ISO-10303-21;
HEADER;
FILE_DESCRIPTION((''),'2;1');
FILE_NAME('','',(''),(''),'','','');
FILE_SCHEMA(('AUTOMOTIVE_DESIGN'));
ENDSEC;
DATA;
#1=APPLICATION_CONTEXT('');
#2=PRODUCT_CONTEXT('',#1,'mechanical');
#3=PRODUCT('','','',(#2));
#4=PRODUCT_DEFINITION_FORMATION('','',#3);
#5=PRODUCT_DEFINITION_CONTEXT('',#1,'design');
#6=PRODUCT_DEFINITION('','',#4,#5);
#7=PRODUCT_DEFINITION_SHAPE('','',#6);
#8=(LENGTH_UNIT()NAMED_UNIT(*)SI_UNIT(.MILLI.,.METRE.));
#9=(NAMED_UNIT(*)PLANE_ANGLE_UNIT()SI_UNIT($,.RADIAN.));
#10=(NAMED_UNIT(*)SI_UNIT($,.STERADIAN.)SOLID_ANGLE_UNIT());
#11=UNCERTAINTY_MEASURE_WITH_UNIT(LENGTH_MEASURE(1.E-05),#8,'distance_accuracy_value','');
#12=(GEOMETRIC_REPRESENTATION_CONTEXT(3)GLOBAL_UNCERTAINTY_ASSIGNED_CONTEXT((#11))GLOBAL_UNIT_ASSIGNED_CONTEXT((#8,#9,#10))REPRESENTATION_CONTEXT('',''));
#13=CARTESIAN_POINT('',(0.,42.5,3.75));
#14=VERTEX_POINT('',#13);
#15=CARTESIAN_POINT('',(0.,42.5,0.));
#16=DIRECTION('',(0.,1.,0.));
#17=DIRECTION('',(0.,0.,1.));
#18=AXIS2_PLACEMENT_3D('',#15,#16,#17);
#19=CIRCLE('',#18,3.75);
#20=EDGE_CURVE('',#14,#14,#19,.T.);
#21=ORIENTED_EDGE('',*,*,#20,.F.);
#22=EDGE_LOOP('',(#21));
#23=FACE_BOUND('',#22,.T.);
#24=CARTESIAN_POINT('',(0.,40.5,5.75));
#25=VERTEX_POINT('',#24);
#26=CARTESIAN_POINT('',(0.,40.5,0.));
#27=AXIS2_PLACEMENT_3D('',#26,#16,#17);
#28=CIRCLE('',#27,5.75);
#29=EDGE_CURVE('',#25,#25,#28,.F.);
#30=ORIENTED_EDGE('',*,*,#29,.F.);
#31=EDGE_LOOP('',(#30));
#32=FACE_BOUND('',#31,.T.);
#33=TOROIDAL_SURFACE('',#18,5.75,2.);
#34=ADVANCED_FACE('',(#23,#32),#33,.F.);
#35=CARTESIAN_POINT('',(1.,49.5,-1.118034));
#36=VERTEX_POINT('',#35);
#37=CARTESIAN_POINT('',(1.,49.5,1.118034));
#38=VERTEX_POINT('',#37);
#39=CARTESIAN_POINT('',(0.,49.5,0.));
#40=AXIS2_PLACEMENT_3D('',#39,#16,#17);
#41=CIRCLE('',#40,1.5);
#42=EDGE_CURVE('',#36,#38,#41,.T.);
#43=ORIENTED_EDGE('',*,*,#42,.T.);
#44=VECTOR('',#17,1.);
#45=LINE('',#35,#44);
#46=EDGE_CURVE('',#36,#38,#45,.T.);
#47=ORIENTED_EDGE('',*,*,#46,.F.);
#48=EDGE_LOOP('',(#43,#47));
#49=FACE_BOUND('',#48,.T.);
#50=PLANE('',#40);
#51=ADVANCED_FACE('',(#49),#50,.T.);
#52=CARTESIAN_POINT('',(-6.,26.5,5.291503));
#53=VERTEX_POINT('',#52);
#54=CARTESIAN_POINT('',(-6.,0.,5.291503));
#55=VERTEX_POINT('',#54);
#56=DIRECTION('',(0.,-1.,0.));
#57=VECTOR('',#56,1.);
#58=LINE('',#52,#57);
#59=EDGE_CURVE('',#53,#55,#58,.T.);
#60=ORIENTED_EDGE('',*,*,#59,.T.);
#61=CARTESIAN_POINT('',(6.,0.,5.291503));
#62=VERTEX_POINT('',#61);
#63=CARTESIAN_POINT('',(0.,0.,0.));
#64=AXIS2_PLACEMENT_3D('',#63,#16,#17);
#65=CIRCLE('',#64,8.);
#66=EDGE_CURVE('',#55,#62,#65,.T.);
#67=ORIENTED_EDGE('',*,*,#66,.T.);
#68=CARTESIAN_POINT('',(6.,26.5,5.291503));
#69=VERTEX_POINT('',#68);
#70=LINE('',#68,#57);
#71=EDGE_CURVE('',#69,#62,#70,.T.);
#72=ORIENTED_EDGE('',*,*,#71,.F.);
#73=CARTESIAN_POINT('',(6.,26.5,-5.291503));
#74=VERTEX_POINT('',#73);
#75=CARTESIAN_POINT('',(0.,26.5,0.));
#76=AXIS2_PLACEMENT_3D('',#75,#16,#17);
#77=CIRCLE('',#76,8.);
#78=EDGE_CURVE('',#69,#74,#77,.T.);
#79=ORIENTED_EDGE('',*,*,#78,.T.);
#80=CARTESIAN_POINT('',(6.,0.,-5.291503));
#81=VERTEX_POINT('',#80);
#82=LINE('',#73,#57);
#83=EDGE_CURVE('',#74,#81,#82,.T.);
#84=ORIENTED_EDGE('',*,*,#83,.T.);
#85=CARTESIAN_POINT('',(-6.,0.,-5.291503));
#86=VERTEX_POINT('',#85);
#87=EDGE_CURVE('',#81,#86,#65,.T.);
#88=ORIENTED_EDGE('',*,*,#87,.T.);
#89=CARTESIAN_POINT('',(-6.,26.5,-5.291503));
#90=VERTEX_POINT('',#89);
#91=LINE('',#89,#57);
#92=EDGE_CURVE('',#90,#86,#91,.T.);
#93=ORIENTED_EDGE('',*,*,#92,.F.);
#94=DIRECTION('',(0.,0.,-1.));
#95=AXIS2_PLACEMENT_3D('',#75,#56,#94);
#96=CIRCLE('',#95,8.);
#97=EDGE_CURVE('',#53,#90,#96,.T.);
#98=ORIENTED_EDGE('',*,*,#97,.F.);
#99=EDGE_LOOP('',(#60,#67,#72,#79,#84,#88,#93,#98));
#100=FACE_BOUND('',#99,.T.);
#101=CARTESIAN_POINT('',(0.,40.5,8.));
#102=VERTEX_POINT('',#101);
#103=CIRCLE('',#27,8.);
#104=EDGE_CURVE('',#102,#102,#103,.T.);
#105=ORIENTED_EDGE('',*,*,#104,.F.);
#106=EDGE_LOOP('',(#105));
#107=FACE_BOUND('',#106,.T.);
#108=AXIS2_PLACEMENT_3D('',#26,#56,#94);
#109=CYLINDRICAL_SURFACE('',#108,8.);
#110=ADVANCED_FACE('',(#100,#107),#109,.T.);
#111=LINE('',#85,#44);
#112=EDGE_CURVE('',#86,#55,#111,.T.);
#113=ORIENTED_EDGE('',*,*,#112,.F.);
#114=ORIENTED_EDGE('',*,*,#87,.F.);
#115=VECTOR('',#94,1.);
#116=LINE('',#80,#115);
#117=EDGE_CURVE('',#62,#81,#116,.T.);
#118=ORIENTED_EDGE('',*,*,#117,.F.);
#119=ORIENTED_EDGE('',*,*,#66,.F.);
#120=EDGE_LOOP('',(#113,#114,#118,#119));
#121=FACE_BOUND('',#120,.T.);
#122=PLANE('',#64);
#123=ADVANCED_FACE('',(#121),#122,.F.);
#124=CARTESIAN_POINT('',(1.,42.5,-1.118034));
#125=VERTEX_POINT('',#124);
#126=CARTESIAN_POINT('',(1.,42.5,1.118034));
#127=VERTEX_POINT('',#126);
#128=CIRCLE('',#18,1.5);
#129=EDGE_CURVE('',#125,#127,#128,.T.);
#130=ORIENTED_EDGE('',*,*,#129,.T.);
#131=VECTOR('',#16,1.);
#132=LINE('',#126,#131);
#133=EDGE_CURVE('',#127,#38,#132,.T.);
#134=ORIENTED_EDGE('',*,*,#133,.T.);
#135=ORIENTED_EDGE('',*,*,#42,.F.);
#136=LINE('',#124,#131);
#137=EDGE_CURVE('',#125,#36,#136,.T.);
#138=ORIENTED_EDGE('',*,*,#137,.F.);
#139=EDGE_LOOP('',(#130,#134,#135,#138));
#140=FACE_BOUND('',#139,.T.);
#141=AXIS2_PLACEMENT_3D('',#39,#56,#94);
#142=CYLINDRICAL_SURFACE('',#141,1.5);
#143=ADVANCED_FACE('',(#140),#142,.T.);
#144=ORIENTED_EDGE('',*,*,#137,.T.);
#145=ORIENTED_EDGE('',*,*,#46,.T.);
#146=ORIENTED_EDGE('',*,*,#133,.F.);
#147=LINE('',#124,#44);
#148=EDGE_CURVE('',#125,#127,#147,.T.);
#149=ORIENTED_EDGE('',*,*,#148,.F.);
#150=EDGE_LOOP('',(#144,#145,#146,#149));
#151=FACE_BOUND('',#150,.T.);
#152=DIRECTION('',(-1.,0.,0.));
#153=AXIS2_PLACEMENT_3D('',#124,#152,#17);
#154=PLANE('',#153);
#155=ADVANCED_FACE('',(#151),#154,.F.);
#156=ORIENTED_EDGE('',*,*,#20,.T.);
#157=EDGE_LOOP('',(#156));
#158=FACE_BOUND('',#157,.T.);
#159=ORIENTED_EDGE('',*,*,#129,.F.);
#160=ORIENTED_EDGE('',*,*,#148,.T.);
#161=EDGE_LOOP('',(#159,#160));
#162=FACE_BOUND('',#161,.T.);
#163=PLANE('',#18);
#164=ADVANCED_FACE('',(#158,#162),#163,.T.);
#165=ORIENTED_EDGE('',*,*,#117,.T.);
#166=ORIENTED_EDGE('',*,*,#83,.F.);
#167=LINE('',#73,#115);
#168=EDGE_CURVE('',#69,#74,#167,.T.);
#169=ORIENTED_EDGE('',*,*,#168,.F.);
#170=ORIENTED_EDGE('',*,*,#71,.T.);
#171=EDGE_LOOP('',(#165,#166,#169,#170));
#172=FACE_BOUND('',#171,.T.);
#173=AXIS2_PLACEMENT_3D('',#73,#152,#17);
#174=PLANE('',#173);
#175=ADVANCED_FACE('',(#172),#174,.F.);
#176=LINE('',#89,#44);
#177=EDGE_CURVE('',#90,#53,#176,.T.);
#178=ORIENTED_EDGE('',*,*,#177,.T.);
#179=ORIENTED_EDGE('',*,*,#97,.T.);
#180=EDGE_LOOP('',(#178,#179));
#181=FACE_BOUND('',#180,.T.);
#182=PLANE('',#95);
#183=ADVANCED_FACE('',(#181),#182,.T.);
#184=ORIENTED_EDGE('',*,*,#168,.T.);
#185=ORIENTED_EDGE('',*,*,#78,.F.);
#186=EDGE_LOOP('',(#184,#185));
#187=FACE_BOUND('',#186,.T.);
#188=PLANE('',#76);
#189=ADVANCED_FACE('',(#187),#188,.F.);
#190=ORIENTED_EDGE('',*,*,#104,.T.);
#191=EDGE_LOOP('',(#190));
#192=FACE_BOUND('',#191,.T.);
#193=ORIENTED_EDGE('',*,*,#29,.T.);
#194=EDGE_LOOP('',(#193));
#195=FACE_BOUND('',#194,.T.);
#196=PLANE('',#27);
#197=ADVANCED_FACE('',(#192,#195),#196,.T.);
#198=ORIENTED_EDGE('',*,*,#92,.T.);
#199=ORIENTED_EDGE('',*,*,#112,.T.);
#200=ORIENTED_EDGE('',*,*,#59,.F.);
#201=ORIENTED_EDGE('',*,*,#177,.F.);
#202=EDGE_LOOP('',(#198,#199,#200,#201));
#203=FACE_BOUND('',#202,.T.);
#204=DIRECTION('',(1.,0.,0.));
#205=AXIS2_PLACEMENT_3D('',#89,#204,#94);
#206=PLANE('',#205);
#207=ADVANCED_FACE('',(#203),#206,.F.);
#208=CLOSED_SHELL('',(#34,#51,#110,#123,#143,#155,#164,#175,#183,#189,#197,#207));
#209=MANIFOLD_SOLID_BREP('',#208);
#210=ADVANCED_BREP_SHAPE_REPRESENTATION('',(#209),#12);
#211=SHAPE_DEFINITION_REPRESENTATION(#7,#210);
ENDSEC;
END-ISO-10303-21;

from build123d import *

# Parameters (mm, degrees)
SKETCH1_R           = 8
BOSS_EXTRUDE1_DEPTH = 40.5
SKETCH2_W           = 6
SKETCH2_H           = 10.583005244
CUT_EXTRUDE1_DEPTH  = 26.5
SKETCH3_R           = 3.75
BOSS_EXTRUDE2_DEPTH = 2
FILLET1_R           = 2
SKETCH4_R           = 1.5
BOSS_EXTRUDE3_DEPTH = 7
SKETCH5_W           = 0.5
SKETCH5_H           = 2.236067978
CUT_EXTRUDE2_DEPTH  = 7


with BuildPart() as part:
    # Sketch1 → Boss-Extrude1 (new body)
    with BuildSketch(Plane(origin=(0, 0, 0), x_dir=(1, 0, 0), z_dir=(0, 1, 0))):
        with Locations(Location((0, 0, 0), (0, 0, 270))):
            Circle(SKETCH1_R)
    extrude(amount=BOSS_EXTRUDE1_DEPTH)

    # Sketch2 → Cut-Extrude1 (cut)
    with BuildSketch(Plane(origin=(0, 0, 0), x_dir=(-1, 0, 0), z_dir=(0, -1, 0))):
        with Locations((9, 0)):
            Rectangle(SKETCH2_W, SKETCH2_H)
        with Locations((-9, 0)):
            Rectangle(SKETCH2_W, SKETCH2_H)
    extrude(amount=-CUT_EXTRUDE1_DEPTH, mode=Mode.SUBTRACT)

    # Sketch3 → Boss-Extrude2 (add)
    with BuildSketch(Plane(origin=(0, 40.5, 0), x_dir=(1, 0, 0), z_dir=(0, 1, 0))):
        with Locations(Location((0, 0, 0), (0, 0, 270))):
            Circle(SKETCH3_R)
    extrude(amount=BOSS_EXTRUDE2_DEPTH)

    # Fillet1
    fillet1_edges = [part.edges().sort_by_distance(p)[0] for p in [
        (0, 40.5, -3.75),
    ]]
    fillet(fillet1_edges, radius=FILLET1_R - 0.0001)  # a hair under: the kernel refuses the full size

    # Sketch4 → Boss-Extrude3 (add)
    with BuildSketch(Plane(origin=(0, 42.5, 0), x_dir=(1, 0, 0), z_dir=(0, 1, 0))):
        with Locations(Location((0, 0, 0), (0, 0, 270))):
            Circle(SKETCH4_R)
    extrude(amount=BOSS_EXTRUDE3_DEPTH)

    # Sketch5 → Cut-Extrude2 (cut)
    with BuildSketch(Plane(origin=(0, 49.5, 0), x_dir=(1, 0, 0), z_dir=(0, 1, 0))):
        with Locations((1.25, 0)):
            Rectangle(SKETCH5_W, SKETCH5_H)
    extrude(amount=-CUT_EXTRUDE2_DEPTH, mode=Mode.SUBTRACT)


solid = part.part
